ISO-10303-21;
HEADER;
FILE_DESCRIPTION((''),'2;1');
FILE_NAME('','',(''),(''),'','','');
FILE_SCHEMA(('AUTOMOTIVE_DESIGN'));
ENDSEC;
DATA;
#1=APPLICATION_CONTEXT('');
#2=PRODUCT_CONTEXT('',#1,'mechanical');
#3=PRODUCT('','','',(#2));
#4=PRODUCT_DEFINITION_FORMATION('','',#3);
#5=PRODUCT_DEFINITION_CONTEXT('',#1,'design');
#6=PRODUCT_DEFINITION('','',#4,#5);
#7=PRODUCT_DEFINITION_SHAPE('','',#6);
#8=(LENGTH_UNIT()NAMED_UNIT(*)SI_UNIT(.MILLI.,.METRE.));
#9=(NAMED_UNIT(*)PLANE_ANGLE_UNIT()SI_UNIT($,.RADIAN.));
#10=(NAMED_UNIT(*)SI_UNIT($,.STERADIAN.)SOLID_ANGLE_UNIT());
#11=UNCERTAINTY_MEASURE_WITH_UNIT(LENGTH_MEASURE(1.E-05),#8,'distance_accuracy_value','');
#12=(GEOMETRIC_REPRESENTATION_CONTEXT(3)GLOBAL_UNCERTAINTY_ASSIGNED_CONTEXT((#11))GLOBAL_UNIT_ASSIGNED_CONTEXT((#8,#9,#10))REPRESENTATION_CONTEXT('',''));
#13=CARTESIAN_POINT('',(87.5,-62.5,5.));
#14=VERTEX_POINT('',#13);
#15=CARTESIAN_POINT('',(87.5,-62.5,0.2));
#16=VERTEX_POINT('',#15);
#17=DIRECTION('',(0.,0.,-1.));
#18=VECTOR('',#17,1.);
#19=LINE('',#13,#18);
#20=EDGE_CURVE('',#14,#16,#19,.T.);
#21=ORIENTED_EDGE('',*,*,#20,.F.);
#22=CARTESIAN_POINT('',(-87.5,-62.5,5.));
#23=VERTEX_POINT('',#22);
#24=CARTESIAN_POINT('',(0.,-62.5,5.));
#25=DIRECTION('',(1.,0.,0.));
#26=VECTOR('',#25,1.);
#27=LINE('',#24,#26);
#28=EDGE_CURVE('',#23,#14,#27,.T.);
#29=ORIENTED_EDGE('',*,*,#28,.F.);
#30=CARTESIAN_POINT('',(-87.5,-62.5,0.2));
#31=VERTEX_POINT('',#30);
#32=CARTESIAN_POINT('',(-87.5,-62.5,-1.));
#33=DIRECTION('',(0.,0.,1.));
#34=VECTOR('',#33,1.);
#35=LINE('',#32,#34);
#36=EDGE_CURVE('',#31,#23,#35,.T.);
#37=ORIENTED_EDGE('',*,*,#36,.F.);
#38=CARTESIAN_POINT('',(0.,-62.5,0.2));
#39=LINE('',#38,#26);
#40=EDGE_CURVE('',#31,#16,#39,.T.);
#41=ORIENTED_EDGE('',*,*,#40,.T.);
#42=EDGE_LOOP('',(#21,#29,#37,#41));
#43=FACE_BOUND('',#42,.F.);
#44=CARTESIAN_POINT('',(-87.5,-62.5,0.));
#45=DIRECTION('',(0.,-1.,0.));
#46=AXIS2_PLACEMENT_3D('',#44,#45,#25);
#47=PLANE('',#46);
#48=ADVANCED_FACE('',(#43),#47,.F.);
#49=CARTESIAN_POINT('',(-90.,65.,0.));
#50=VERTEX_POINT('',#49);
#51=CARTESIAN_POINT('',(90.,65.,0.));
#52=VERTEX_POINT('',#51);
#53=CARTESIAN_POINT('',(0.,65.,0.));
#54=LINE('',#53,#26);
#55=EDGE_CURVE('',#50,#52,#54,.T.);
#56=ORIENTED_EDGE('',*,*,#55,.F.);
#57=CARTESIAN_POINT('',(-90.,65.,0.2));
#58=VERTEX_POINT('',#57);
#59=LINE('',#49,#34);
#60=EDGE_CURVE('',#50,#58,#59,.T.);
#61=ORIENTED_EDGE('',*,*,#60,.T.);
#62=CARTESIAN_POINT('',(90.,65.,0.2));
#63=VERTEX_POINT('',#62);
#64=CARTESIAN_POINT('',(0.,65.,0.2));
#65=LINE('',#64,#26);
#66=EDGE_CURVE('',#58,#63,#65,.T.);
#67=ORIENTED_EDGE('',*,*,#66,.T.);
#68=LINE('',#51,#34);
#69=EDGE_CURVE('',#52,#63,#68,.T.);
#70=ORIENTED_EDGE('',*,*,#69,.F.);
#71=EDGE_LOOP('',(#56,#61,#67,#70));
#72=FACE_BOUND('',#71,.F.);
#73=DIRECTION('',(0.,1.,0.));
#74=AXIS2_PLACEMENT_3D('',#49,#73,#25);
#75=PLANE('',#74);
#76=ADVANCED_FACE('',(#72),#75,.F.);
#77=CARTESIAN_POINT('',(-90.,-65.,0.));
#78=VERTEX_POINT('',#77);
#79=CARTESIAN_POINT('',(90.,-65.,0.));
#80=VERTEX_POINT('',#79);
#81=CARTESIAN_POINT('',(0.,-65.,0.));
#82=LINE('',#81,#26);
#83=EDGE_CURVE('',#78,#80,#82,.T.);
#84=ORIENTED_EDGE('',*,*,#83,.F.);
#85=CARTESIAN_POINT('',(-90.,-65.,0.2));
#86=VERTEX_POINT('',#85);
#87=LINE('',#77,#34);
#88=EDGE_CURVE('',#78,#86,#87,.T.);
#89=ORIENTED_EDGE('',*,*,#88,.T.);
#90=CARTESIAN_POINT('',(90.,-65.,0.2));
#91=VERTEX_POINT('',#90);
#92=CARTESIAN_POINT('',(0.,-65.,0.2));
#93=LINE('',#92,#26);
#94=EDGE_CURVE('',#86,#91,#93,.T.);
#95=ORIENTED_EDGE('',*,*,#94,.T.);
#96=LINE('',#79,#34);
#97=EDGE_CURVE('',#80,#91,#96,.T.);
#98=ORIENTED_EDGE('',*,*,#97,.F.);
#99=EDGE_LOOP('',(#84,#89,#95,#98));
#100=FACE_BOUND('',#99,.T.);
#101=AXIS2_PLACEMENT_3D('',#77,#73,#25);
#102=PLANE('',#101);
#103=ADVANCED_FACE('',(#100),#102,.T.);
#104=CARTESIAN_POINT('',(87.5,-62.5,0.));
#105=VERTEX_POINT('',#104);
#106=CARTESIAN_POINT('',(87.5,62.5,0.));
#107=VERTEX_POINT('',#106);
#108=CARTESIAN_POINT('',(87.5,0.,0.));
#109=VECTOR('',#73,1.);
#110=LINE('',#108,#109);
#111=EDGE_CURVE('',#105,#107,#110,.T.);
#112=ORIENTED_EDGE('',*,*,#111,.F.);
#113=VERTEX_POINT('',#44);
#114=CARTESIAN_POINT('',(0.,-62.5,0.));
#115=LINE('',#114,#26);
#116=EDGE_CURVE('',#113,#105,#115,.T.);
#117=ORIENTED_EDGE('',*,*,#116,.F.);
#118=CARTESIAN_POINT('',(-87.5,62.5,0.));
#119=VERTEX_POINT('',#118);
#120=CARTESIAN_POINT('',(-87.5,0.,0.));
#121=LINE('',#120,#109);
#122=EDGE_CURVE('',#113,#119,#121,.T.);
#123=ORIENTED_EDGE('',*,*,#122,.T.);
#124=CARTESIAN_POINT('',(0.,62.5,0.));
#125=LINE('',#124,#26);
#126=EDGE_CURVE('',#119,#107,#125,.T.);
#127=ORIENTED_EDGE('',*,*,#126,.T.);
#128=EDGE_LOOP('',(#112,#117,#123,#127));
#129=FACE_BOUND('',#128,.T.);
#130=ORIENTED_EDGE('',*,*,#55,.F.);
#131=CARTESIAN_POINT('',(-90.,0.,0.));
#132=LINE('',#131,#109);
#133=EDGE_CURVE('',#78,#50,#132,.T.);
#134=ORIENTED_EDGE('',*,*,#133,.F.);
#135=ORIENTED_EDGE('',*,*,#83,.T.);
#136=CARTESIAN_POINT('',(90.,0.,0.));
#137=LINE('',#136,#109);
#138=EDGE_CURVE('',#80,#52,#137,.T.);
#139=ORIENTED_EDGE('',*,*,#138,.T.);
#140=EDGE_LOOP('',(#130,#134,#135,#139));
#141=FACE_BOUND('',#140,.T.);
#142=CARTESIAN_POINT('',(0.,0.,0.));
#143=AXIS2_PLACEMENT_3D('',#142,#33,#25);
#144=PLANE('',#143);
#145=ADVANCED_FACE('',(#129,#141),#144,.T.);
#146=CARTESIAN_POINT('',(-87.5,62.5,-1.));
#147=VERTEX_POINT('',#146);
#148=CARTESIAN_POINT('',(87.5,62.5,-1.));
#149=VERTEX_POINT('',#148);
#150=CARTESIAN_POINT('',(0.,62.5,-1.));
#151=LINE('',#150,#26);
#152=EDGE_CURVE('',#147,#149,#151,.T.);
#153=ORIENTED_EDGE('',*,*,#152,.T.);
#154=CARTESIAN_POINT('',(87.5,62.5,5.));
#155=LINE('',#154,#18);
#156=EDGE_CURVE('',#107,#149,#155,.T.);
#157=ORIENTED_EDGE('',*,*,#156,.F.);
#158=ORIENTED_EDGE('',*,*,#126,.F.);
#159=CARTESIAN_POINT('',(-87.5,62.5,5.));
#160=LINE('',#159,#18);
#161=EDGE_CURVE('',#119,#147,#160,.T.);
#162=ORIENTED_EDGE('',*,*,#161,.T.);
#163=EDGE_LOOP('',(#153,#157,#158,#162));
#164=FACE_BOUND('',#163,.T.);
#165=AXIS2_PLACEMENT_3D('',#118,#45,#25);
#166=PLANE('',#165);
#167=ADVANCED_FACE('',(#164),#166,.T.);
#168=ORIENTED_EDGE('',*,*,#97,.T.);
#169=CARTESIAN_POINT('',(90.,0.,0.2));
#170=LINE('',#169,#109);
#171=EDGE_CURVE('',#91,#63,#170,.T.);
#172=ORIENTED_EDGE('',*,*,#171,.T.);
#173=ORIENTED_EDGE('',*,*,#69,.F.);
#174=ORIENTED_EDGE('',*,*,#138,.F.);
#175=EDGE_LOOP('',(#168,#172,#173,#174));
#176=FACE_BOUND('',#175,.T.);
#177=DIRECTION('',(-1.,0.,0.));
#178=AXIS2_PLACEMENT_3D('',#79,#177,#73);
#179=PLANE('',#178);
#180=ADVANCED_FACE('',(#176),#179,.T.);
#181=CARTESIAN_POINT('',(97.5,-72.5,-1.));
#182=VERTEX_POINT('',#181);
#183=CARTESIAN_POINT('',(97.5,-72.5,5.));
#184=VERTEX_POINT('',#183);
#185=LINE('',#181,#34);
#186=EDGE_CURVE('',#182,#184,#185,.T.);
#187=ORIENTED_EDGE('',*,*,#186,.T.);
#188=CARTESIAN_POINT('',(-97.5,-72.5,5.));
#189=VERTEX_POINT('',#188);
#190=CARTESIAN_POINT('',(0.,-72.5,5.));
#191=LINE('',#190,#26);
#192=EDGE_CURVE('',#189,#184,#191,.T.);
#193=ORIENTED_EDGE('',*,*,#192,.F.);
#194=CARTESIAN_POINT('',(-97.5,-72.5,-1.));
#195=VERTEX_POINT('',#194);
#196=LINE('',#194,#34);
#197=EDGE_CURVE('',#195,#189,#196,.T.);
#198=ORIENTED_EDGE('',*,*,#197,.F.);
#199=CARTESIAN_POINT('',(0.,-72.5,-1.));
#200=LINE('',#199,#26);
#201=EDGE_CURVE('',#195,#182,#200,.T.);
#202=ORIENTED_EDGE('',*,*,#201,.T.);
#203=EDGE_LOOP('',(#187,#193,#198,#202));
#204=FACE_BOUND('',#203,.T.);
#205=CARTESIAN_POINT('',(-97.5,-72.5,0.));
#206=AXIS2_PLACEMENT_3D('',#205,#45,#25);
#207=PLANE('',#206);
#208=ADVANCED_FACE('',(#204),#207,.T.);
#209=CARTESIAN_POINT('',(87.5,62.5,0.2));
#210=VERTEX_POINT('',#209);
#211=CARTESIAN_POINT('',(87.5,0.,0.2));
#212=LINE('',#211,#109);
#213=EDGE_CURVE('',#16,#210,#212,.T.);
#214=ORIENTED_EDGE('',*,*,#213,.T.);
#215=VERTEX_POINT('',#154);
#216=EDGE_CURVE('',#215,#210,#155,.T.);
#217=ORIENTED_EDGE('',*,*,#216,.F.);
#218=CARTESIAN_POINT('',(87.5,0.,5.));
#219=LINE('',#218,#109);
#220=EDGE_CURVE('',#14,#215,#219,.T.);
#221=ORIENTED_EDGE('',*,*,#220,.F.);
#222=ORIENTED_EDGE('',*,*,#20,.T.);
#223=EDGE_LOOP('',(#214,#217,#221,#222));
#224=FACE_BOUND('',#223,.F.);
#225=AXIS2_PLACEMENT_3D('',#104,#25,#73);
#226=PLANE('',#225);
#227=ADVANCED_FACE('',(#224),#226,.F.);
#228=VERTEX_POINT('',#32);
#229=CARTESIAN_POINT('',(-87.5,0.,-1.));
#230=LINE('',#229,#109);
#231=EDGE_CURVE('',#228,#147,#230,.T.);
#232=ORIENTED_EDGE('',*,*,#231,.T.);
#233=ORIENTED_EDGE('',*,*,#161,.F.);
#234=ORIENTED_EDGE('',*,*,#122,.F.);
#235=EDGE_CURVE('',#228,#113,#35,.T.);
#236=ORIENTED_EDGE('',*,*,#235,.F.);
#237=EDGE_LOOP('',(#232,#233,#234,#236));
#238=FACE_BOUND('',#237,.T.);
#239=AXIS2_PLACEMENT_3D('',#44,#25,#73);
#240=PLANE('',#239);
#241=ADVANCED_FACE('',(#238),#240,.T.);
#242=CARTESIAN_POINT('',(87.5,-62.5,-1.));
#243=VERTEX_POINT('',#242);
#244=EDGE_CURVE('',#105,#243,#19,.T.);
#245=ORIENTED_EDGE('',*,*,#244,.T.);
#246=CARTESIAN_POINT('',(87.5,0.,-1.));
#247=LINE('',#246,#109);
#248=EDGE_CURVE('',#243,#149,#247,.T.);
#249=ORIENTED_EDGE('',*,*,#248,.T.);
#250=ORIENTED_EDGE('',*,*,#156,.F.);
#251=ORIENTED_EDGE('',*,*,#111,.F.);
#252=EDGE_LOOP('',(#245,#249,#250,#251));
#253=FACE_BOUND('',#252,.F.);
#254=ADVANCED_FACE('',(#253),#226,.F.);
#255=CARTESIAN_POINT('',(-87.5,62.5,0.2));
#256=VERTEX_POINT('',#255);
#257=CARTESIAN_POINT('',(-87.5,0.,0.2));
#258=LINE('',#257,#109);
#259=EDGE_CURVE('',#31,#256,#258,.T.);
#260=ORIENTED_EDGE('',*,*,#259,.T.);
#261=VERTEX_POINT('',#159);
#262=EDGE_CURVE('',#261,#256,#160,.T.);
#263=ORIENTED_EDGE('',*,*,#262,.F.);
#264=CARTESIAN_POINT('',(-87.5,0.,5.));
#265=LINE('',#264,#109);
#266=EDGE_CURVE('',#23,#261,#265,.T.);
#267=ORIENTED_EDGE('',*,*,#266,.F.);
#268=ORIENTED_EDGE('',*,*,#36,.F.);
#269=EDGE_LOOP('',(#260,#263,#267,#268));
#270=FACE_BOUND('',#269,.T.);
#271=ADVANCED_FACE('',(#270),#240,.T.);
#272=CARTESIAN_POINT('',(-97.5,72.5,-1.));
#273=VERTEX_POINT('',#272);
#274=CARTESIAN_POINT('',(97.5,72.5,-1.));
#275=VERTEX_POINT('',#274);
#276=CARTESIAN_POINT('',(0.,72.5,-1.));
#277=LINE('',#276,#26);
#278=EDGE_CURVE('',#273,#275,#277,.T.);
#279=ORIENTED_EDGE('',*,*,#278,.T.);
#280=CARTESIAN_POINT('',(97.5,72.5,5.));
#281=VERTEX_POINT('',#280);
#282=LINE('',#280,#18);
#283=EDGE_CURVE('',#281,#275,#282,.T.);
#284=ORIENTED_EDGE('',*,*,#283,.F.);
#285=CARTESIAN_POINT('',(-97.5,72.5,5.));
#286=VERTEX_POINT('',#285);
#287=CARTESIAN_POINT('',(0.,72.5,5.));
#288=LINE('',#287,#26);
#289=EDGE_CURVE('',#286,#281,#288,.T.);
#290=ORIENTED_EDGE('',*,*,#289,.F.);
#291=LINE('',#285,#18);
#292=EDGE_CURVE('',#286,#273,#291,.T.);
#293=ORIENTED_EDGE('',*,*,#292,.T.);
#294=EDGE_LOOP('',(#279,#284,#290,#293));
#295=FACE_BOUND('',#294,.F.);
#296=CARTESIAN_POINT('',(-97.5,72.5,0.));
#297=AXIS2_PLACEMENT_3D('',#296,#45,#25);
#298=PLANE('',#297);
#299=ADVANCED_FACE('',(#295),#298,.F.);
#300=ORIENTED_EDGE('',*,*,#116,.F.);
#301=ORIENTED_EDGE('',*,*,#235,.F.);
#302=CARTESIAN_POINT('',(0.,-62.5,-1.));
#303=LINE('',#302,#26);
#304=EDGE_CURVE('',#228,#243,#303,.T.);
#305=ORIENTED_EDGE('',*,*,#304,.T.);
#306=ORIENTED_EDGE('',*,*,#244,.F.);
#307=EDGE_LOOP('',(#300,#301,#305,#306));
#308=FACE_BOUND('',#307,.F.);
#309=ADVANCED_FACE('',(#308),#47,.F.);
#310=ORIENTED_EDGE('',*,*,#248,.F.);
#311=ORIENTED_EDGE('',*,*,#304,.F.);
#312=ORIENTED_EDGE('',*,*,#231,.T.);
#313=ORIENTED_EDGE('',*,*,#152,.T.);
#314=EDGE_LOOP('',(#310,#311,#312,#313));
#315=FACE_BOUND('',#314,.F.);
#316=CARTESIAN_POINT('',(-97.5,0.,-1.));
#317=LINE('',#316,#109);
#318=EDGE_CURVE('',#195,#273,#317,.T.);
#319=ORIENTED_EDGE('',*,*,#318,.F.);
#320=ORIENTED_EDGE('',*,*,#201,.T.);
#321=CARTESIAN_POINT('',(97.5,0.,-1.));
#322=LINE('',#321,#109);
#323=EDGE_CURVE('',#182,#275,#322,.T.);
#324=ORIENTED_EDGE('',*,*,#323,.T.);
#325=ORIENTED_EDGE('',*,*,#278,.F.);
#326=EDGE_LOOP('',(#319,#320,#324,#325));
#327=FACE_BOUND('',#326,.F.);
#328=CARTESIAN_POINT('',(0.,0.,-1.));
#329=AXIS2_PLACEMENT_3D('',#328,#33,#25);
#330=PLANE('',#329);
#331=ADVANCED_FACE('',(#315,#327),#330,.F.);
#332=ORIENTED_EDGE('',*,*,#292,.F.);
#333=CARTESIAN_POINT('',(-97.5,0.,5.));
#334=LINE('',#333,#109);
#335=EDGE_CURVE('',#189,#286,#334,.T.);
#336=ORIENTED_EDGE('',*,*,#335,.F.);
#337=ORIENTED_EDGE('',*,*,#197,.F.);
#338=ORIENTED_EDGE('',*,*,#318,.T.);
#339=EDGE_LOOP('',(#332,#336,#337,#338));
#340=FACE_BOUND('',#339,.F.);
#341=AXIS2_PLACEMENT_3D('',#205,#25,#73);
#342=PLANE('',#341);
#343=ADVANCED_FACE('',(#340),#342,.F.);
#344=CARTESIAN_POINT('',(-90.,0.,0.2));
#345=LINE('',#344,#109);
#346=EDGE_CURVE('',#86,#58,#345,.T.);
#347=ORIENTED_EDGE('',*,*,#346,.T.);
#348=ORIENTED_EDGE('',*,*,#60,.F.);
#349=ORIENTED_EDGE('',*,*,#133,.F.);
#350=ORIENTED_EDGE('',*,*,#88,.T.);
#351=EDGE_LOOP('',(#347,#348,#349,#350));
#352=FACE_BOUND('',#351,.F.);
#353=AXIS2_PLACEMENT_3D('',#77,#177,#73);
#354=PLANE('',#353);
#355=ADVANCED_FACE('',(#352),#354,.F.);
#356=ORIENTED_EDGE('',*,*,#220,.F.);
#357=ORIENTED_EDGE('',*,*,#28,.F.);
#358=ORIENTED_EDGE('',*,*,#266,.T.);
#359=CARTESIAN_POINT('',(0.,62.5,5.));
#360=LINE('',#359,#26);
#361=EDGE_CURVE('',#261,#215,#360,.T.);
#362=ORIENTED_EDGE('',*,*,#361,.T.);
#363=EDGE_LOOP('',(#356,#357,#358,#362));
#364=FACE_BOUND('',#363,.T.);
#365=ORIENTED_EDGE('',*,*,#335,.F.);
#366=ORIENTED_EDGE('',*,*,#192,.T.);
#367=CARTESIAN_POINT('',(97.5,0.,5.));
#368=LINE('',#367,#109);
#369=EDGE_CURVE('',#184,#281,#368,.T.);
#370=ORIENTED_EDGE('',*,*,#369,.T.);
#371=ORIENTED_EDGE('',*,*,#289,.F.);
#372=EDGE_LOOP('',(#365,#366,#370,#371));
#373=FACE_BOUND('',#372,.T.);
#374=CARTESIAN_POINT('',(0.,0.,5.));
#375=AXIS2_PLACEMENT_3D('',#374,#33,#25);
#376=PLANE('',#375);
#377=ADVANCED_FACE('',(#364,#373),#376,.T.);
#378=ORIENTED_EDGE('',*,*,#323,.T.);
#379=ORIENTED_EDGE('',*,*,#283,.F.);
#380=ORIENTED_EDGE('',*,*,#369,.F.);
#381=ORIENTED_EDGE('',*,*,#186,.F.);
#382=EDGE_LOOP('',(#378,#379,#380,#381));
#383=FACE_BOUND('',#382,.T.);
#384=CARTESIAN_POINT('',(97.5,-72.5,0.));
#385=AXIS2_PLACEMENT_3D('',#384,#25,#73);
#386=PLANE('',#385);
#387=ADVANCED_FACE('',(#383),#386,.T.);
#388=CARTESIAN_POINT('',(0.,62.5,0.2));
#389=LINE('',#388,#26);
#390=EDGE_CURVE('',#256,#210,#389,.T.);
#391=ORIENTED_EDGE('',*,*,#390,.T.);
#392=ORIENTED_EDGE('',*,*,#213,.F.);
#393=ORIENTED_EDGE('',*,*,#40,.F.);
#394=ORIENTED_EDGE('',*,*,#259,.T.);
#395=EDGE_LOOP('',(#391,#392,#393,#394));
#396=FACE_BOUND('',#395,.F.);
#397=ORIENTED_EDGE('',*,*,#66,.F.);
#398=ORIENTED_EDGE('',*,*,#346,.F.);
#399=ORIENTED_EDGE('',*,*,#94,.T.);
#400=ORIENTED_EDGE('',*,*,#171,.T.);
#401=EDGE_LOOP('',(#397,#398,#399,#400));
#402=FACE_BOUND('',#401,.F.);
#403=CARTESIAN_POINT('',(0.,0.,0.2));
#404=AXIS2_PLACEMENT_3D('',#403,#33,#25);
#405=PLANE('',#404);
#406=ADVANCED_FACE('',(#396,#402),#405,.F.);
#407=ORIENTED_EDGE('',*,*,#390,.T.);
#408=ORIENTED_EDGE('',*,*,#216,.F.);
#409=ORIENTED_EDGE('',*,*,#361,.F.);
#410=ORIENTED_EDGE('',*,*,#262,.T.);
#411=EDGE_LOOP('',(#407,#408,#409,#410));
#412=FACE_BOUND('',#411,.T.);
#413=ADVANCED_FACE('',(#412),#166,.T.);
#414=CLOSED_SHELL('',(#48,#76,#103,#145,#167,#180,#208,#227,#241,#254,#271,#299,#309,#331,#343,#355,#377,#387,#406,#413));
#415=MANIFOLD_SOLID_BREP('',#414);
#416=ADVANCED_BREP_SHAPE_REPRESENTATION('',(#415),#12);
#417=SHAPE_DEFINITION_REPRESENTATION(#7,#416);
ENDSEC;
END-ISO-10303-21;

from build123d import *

# Parameters (mm, degrees)
F0_W     = 195
F0_H     = 145
F0_W_2   = 180
F0_H_2   = 130
F0_W_3   = 175
F0_H_3   = 125
F1_DEPTH = 5
F2_DEPTH = 1
F3_DEPTH = 0.2


with BuildPart() as f1:
    # F0 (on Top) → F1 (new body)
    with BuildSketch(Plane.XY):
        Rectangle(F0_W, F0_H)
        Rectangle(F0_W_2, F0_H_2, mode=Mode.SUBTRACT)
        Rectangle(F0_W_2, F0_H_2)
        Rectangle(F0_W_3, F0_H_3, mode=Mode.SUBTRACT)
    extrude(amount=F1_DEPTH)

    # F0 (on Top) → F2 (join)
    with BuildSketch(Plane.XY):
        Rectangle(F0_W, F0_H)
        Rectangle(F0_W_2, F0_H_2, mode=Mode.SUBTRACT)
        Rectangle(F0_W_2, F0_H_2)
        Rectangle(F0_W_3, F0_H_3, mode=Mode.SUBTRACT)
    extrude(amount=-F2_DEPTH)

    # F0 (on Top) → F3 (cut)
    with BuildSketch(Plane.XY):
        Rectangle(F0_W_2, F0_H_2)
        Rectangle(F0_W_3, F0_H_3, mode=Mode.SUBTRACT)
    extrude(amount=F3_DEPTH, mode=Mode.SUBTRACT)


solid = f1.part
